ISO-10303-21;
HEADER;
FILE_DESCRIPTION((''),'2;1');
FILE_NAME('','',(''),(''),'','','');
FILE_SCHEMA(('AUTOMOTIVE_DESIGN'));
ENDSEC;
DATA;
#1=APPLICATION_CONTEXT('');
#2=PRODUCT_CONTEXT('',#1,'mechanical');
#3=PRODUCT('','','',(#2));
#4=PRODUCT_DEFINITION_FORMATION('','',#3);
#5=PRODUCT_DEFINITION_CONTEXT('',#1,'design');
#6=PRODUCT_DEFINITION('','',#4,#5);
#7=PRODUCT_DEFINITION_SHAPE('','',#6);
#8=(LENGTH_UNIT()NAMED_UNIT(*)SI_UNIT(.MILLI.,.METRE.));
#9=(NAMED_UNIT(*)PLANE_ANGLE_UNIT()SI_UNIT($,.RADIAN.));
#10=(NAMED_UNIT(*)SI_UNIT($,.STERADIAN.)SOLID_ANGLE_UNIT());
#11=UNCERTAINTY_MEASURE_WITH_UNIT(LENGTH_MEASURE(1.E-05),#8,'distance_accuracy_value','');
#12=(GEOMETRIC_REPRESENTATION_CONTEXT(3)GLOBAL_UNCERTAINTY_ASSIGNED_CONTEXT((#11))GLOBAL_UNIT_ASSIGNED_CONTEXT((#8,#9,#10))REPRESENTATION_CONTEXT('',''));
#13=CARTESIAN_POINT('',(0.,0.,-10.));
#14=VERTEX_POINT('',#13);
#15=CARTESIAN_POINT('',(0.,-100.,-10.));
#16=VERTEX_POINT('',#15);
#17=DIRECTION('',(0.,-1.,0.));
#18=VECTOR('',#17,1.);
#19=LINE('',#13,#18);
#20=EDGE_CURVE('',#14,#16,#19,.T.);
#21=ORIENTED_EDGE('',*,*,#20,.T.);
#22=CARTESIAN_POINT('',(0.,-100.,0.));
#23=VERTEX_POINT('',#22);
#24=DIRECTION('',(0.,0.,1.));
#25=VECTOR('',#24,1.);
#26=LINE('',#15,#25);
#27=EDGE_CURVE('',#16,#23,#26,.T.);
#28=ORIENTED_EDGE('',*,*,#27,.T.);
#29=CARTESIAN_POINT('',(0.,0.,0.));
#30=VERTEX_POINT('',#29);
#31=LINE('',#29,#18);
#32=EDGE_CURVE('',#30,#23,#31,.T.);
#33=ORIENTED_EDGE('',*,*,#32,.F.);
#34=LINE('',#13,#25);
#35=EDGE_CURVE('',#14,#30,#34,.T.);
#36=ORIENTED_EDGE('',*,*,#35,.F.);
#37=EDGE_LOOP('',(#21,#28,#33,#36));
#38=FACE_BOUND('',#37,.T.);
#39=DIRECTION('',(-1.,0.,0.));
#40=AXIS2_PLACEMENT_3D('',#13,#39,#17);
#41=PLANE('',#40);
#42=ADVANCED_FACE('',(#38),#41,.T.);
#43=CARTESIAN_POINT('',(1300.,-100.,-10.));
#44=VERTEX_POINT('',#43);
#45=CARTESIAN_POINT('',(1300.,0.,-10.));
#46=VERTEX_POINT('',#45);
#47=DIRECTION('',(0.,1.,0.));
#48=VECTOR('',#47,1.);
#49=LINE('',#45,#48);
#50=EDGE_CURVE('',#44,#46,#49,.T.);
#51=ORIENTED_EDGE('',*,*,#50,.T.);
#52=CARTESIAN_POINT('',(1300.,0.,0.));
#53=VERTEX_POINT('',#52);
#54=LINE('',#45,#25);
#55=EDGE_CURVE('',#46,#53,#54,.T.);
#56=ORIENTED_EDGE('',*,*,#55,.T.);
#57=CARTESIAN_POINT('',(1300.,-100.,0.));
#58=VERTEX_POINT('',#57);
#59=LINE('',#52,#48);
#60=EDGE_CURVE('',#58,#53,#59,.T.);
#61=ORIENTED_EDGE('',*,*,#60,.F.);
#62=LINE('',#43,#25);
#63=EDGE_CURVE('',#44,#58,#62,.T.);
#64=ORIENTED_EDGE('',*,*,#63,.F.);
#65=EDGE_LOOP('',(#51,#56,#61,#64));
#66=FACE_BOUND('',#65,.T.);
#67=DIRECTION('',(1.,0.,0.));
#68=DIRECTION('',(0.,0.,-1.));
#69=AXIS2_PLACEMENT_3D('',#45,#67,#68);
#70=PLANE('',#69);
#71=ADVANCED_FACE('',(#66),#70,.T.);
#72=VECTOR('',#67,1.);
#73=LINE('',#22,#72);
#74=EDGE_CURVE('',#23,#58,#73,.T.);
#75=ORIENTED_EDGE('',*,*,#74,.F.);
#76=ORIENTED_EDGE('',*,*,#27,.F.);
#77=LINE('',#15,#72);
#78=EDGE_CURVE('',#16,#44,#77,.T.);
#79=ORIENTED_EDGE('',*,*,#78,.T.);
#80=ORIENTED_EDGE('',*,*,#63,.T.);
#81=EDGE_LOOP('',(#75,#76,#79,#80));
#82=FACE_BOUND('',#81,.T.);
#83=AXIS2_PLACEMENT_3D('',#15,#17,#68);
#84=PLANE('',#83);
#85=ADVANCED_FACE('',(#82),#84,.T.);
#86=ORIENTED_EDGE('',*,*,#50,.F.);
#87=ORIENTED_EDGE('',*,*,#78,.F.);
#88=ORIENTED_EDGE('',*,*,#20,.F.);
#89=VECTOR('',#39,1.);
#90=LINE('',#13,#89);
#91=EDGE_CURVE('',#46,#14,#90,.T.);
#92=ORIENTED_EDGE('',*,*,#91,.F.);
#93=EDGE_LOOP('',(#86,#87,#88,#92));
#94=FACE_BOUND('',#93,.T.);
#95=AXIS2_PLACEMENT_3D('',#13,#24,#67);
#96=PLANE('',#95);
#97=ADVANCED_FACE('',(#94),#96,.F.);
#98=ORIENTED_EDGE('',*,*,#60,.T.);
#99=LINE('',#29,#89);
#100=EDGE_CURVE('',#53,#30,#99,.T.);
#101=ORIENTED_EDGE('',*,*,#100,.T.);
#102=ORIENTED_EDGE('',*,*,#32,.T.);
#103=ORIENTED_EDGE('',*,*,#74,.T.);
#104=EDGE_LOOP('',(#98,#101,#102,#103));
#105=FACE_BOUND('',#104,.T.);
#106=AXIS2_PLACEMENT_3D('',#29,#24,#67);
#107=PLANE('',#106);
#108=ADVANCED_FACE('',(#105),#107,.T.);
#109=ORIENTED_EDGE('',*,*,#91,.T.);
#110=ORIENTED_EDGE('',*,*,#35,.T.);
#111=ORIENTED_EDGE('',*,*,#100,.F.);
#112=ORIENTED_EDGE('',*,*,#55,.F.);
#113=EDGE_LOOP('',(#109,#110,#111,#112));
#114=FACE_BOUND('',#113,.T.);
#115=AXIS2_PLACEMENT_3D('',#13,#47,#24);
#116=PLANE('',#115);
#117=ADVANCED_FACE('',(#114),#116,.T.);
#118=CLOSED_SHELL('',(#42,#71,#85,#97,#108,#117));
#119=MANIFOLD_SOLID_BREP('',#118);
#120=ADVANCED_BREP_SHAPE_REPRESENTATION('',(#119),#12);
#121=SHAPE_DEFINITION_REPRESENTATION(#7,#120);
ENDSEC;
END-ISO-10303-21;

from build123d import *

# Parameters (mm, degrees)
IZIM1_W            = 1300
IZIM1_H            = 100
TABAN_FLAN_1_DEPTH = 10


# Sheet-metal steps are written as plain solids
with BuildPart() as part:
    # Çizim1 → Taban-Flanş1 (new body)
    with BuildSketch(Plane.XY):
        with Locations((650, -50)):
            Rectangle(IZIM1_W, IZIM1_H)
    extrude(amount=-TABAN_FLAN_1_DEPTH)


solid = part.part
